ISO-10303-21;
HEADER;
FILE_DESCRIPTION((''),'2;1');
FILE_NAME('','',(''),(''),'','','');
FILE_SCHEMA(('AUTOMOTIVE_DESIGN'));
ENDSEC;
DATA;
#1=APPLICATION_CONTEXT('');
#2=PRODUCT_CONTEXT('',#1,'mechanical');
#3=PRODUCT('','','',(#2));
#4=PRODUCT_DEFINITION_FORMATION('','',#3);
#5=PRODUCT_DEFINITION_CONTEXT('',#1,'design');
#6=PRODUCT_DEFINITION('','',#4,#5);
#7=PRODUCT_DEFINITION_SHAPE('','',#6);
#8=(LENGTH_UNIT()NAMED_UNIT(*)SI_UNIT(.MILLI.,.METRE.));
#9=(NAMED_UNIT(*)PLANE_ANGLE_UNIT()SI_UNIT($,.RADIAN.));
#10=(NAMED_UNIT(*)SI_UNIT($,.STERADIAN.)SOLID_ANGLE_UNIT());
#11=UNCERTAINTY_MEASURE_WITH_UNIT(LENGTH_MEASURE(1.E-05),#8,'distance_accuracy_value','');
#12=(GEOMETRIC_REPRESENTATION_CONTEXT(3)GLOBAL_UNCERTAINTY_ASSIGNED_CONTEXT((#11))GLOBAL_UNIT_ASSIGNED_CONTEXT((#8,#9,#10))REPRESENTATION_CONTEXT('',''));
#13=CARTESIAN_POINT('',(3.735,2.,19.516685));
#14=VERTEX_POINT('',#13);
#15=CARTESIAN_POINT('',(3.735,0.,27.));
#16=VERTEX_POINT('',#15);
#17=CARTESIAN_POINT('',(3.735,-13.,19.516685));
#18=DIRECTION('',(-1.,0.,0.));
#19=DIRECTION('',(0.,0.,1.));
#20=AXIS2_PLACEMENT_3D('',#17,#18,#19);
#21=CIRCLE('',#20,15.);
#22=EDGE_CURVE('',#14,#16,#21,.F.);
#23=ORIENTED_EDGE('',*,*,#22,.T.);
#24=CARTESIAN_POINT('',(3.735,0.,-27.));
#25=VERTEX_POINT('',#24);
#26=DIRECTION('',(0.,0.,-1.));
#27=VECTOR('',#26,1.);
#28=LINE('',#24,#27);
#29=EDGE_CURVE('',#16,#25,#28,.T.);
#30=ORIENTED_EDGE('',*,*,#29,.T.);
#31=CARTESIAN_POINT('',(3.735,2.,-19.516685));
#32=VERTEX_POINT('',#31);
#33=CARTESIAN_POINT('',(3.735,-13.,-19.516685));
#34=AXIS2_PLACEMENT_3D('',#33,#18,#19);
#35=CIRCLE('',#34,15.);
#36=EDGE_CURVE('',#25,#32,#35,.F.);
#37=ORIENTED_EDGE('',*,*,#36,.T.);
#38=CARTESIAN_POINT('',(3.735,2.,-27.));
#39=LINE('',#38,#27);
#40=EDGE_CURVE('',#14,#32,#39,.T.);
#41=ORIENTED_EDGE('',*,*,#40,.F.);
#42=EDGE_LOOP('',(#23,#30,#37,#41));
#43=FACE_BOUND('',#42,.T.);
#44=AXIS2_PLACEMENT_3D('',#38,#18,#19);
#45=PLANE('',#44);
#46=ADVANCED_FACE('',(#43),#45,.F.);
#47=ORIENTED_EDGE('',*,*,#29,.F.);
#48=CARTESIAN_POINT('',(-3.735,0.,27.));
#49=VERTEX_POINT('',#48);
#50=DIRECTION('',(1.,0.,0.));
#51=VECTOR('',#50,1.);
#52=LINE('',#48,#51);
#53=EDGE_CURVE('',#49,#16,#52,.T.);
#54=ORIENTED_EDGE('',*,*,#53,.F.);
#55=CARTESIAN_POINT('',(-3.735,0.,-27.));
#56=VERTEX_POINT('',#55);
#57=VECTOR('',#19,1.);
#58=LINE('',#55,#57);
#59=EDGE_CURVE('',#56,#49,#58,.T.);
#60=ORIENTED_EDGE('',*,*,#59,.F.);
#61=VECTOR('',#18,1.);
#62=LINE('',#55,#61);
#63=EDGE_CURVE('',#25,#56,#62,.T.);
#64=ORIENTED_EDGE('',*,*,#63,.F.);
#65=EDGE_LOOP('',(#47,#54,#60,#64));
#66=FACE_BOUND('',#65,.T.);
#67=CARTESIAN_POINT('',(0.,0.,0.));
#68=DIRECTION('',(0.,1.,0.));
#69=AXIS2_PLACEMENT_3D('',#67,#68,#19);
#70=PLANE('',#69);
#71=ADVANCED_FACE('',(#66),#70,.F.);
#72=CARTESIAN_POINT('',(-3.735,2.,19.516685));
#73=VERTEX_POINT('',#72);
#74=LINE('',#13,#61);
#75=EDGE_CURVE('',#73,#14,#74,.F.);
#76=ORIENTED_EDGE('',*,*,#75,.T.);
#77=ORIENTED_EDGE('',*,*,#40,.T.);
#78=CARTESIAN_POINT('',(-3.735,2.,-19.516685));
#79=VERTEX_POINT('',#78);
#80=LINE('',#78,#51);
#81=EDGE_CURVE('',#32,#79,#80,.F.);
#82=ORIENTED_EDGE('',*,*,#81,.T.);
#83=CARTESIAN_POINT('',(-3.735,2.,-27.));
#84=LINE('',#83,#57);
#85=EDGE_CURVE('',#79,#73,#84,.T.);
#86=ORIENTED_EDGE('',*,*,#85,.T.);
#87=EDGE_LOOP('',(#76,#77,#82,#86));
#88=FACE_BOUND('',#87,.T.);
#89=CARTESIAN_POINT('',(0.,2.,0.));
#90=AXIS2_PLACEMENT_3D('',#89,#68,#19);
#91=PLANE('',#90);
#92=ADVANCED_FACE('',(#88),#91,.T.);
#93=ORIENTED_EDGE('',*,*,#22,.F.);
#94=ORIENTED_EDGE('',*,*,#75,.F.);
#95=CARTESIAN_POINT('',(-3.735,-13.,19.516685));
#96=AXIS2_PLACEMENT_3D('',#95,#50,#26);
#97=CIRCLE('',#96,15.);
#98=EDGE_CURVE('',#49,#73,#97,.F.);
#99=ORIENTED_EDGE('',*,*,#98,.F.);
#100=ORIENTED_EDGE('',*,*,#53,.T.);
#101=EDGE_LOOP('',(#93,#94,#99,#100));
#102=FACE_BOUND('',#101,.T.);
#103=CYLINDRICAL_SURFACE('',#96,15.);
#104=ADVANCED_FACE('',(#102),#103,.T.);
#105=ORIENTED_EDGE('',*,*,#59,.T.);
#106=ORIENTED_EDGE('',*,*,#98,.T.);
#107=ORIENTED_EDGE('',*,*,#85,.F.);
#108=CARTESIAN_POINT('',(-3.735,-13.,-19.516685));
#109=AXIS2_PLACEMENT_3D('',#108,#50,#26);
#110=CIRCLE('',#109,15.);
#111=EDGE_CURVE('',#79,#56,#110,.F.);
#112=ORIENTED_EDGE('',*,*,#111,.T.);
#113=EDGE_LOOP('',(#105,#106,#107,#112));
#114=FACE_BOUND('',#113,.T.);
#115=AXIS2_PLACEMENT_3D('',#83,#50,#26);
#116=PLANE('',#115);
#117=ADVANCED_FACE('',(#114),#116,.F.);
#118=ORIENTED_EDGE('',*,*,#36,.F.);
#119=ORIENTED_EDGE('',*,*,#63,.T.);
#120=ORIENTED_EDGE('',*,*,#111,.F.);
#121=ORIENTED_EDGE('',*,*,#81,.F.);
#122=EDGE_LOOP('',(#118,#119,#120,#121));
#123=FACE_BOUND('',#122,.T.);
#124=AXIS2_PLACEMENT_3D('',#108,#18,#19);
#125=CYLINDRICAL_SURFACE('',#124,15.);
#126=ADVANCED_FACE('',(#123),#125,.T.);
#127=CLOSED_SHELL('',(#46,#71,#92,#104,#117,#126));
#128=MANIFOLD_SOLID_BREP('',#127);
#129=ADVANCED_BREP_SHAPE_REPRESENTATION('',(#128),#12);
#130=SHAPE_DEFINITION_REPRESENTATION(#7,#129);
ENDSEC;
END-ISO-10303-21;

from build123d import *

# Parameters (mm, degrees)
SKETCH_1_W      = 7.47
SKETCH_1_H      = 54
EXTRUDE_1_DEPTH = 2
FILLET_1_R      = 15
FILLET_2_R      = 15


with BuildPart() as part:
    # Эскиз1 → Бобышка-Вытянуть1 (new body)
    with BuildSketch(Plane(origin=(0, 0, 0), x_dir=(1, 0, 0), z_dir=(0, 1, 0))):
        Rectangle(SKETCH_1_W, SKETCH_1_H)
    extrude(amount=EXTRUDE_1_DEPTH)

    # Скругление1
    # the kernel refuses this fillet: 15 mm, written as the material it takes off along each edge
    with BuildSketch(Plane(origin=(22.443286934, 2, 27), x_dir=(0, -1, 0), z_dir=(-1, 0, 0))) as fillet_1_piece_1:
        with BuildLine():
            CenterArc((15, -7.483314774), FILLET_1_R, 150.073565133, 29.926434867)
            Line((0, -7.483314774), (-0.3, -7.483314774))
            Line((-0.3, -7.483314774), (-0.3, 0))
            Line((-0.3, 0), (0, 0.3))
            ThreePointArc((0, 0.3), (1, 0.3), (1.74, 0.149666295))
            Line((1.74, 0.149666295), (2, 0))
        make_face()
    extrude(amount=44.886573868, mode=Mode.SUBTRACT)

    # Скругление2
    # the kernel refuses this fillet: 15 mm, written as the material it takes off along each edge
    with BuildSketch(Plane(origin=(-22.443286934, 2, -27), x_dir=(0, -1, 0), z_dir=(1, 0, 0))) as fillet_2_piece_1:
        with BuildLine():
            CenterArc((15, -7.483314774), FILLET_2_R, 150.073565133, 29.926434867)
            Line((0, -7.483314774), (-0.3, -7.483314774))
            Line((-0.3, -7.483314774), (-0.3, 0))
            Line((-0.3, 0), (0, 0.3))
            ThreePointArc((0, 0.3), (1, 0.3), (1.74, 0.149666295))
            Line((1.74, 0.149666295), (2, 0))
        make_face()
    extrude(amount=44.886573868, mode=Mode.SUBTRACT)


solid = part.part
